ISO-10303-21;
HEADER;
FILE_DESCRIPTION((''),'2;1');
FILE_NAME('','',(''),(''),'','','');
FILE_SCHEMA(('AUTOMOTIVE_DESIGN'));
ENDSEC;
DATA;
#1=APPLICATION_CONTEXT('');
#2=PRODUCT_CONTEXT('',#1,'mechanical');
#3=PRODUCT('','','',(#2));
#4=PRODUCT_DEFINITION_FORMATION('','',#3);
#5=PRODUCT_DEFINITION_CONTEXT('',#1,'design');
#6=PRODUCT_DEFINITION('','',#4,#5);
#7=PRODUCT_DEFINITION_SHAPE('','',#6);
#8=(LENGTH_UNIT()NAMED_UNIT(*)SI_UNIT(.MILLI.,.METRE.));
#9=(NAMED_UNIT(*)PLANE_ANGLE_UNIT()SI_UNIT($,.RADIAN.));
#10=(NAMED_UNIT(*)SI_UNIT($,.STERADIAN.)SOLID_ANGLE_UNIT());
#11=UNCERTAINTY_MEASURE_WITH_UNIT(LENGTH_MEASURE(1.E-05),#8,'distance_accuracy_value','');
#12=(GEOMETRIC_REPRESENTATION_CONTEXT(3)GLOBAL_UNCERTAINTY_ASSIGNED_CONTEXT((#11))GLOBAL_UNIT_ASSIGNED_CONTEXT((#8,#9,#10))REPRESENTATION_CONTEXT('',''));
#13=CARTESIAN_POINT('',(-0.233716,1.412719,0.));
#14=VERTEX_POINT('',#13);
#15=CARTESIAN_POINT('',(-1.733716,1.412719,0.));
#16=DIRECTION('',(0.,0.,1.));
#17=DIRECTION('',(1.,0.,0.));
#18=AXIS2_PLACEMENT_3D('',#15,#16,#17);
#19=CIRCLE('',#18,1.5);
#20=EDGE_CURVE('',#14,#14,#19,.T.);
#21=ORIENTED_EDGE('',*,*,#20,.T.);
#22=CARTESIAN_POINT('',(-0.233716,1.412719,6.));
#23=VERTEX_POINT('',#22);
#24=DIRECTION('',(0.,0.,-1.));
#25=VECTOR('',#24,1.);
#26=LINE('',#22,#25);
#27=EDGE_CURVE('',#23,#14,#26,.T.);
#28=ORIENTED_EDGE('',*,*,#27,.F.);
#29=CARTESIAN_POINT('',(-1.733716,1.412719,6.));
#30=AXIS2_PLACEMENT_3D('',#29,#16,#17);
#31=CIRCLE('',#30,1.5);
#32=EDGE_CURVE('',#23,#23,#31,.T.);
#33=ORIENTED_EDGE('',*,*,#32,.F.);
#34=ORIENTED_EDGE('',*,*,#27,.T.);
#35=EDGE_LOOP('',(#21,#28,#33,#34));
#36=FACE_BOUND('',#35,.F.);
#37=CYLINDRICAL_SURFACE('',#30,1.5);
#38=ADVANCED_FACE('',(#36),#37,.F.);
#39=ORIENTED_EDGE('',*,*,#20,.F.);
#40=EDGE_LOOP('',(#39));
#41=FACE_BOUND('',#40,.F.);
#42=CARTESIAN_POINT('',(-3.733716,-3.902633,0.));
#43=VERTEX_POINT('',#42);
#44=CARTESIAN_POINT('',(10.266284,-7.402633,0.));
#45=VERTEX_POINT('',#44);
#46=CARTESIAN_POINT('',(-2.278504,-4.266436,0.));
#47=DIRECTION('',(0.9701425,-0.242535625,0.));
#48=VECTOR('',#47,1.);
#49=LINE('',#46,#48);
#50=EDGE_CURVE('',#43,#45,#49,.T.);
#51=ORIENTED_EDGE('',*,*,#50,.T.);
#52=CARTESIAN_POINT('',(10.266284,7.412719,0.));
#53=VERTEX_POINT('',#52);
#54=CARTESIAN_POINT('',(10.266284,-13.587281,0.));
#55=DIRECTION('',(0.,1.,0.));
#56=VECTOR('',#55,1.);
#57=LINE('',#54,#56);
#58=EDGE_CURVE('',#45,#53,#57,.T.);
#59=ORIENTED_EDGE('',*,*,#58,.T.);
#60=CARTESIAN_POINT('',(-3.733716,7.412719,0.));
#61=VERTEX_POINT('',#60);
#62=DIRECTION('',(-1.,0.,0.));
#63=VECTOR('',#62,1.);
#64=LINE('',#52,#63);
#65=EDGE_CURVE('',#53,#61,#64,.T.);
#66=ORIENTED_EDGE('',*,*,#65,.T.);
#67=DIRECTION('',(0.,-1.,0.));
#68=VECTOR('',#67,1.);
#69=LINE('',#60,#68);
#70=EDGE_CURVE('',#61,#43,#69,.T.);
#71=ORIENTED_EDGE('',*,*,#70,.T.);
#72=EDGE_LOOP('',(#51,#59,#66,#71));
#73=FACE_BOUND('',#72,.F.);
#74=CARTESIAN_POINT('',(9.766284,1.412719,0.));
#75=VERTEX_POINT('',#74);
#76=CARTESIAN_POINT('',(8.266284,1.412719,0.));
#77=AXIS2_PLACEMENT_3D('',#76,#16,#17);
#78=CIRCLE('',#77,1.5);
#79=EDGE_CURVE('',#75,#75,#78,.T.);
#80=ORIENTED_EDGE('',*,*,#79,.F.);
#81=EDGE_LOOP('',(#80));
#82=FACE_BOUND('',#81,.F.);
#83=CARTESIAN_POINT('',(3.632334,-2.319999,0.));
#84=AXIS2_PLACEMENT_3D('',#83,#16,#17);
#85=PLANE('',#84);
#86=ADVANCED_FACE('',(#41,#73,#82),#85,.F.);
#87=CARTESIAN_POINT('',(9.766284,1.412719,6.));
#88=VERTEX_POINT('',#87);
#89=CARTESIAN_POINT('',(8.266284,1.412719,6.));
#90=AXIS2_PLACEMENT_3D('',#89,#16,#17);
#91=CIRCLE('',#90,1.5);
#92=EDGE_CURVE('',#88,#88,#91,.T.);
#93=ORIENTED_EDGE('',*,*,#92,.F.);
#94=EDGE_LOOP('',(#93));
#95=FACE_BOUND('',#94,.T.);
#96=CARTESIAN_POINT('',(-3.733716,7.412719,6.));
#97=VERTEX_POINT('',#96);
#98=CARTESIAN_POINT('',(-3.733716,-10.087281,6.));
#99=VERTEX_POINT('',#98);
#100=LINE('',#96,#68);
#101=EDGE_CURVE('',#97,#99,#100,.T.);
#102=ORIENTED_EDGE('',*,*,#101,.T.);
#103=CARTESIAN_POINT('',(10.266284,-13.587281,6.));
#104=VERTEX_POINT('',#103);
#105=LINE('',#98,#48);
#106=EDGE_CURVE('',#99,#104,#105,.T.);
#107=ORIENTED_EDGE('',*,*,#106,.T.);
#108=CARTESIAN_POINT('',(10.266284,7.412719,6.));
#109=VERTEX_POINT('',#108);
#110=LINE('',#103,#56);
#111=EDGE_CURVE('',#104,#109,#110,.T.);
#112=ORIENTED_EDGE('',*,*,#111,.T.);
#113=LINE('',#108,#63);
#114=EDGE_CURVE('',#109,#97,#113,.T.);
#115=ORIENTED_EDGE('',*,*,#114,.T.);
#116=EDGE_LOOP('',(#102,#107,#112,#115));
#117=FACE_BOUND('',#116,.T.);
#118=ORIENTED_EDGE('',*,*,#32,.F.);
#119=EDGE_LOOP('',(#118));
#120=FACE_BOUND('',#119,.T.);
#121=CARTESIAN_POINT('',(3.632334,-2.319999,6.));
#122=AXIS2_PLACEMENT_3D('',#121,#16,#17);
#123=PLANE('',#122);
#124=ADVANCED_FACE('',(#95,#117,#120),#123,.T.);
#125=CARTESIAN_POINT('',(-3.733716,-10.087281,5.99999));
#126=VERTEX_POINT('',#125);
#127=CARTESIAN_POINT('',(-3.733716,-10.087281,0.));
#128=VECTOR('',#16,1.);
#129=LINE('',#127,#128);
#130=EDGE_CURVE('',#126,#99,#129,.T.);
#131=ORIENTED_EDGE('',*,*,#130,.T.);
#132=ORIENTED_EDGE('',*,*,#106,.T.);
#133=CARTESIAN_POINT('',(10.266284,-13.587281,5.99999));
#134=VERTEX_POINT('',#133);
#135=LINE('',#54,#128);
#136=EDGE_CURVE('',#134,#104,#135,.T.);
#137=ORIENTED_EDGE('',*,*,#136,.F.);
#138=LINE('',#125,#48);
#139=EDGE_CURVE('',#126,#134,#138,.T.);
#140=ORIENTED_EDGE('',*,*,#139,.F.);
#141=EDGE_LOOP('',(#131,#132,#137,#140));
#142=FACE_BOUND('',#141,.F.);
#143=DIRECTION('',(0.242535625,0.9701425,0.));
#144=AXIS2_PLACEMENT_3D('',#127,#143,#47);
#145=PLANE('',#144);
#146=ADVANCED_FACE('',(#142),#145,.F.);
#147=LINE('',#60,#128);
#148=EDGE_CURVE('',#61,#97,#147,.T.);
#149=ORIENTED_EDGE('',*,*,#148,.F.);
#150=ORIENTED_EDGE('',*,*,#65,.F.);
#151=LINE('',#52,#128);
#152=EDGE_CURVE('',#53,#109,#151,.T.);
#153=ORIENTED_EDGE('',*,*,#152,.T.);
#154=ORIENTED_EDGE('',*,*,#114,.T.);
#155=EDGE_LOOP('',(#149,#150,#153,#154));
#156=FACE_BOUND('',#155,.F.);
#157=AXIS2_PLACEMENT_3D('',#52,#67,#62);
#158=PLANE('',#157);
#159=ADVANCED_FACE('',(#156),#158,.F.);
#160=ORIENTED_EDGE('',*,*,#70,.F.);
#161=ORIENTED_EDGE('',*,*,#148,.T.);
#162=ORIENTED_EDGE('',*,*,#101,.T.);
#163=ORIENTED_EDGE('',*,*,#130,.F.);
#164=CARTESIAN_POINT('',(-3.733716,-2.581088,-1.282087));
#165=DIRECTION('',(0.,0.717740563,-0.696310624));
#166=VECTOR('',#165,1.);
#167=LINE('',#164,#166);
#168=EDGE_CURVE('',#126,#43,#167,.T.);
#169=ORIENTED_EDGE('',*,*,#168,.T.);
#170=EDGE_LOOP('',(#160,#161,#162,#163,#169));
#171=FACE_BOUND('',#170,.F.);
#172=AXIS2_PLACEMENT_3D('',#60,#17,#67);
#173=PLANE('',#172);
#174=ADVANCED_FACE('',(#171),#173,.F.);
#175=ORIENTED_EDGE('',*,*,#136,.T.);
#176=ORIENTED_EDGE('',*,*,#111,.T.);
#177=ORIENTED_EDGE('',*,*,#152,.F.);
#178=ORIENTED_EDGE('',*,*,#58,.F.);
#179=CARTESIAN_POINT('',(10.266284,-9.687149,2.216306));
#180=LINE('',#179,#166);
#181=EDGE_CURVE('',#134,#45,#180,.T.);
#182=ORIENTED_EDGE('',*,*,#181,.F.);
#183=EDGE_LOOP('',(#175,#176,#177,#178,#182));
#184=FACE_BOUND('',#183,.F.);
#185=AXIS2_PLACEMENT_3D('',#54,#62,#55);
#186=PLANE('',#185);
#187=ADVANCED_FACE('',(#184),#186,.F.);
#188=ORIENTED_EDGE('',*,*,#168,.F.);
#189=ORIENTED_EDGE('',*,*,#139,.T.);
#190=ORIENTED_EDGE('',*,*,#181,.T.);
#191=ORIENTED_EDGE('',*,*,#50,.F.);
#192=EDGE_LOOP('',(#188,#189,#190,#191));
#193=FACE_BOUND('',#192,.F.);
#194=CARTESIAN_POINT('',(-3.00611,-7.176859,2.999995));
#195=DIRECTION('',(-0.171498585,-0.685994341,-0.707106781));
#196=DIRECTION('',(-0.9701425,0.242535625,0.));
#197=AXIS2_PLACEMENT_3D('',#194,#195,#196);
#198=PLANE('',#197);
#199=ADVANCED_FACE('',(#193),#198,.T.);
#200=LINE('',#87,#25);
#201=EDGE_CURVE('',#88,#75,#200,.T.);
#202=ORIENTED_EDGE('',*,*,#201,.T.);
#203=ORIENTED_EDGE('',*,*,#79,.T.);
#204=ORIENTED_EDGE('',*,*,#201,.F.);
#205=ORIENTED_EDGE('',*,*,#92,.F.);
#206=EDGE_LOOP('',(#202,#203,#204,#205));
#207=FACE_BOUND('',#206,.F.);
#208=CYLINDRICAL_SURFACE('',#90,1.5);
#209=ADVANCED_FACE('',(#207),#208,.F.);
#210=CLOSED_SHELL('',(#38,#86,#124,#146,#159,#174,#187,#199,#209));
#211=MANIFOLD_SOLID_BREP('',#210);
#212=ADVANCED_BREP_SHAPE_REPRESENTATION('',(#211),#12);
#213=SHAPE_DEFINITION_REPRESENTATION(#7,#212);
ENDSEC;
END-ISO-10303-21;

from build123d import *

# Parameters (mm, degrees)
F1_DEPTH = 6
F2_SIZE  = 5.99999
F3_R     = 1.5
F4_DEPTH = 6


# Not quite as in the source:
# - a fillet or chamfer is up to 0.001 mm smaller than in the source, because OpenCascade refuses the exact size


with BuildPart() as f1:
    # F0 (on Top) → F1 (new body)
    with BuildSketch(Plane.XY):
        Polygon((10.2662842423, 7.4127185345), (-3.7337157577, 7.4127185345), (-3.7337157577, -10.0872814655), (10.2662842423, -13.5872814655), align=None)
    extrude(amount=F1_DEPTH)

    # F2 (size 6 in the source; OpenCascade refuses exactly that, so slightly less here)
    f2_edges = [f1.edges().sort_by_distance(p)[0] for p in [
        (3.266284, -11.837281, 0),
    ]]
    chamfer(f2_edges, length=F2_SIZE)

    # F3 (on face) → F4 (cut, through all)
    with BuildSketch(Plane.XY.offset(6)):
        with Locations((-1.7337157577, 1.4127185345)):
            Circle(F3_R)
        with Locations((8.2662842423, 1.4127185345)):
            Circle(F3_R)
    extrude(amount=-F4_DEPTH, mode=Mode.SUBTRACT)


solid = f1.part
